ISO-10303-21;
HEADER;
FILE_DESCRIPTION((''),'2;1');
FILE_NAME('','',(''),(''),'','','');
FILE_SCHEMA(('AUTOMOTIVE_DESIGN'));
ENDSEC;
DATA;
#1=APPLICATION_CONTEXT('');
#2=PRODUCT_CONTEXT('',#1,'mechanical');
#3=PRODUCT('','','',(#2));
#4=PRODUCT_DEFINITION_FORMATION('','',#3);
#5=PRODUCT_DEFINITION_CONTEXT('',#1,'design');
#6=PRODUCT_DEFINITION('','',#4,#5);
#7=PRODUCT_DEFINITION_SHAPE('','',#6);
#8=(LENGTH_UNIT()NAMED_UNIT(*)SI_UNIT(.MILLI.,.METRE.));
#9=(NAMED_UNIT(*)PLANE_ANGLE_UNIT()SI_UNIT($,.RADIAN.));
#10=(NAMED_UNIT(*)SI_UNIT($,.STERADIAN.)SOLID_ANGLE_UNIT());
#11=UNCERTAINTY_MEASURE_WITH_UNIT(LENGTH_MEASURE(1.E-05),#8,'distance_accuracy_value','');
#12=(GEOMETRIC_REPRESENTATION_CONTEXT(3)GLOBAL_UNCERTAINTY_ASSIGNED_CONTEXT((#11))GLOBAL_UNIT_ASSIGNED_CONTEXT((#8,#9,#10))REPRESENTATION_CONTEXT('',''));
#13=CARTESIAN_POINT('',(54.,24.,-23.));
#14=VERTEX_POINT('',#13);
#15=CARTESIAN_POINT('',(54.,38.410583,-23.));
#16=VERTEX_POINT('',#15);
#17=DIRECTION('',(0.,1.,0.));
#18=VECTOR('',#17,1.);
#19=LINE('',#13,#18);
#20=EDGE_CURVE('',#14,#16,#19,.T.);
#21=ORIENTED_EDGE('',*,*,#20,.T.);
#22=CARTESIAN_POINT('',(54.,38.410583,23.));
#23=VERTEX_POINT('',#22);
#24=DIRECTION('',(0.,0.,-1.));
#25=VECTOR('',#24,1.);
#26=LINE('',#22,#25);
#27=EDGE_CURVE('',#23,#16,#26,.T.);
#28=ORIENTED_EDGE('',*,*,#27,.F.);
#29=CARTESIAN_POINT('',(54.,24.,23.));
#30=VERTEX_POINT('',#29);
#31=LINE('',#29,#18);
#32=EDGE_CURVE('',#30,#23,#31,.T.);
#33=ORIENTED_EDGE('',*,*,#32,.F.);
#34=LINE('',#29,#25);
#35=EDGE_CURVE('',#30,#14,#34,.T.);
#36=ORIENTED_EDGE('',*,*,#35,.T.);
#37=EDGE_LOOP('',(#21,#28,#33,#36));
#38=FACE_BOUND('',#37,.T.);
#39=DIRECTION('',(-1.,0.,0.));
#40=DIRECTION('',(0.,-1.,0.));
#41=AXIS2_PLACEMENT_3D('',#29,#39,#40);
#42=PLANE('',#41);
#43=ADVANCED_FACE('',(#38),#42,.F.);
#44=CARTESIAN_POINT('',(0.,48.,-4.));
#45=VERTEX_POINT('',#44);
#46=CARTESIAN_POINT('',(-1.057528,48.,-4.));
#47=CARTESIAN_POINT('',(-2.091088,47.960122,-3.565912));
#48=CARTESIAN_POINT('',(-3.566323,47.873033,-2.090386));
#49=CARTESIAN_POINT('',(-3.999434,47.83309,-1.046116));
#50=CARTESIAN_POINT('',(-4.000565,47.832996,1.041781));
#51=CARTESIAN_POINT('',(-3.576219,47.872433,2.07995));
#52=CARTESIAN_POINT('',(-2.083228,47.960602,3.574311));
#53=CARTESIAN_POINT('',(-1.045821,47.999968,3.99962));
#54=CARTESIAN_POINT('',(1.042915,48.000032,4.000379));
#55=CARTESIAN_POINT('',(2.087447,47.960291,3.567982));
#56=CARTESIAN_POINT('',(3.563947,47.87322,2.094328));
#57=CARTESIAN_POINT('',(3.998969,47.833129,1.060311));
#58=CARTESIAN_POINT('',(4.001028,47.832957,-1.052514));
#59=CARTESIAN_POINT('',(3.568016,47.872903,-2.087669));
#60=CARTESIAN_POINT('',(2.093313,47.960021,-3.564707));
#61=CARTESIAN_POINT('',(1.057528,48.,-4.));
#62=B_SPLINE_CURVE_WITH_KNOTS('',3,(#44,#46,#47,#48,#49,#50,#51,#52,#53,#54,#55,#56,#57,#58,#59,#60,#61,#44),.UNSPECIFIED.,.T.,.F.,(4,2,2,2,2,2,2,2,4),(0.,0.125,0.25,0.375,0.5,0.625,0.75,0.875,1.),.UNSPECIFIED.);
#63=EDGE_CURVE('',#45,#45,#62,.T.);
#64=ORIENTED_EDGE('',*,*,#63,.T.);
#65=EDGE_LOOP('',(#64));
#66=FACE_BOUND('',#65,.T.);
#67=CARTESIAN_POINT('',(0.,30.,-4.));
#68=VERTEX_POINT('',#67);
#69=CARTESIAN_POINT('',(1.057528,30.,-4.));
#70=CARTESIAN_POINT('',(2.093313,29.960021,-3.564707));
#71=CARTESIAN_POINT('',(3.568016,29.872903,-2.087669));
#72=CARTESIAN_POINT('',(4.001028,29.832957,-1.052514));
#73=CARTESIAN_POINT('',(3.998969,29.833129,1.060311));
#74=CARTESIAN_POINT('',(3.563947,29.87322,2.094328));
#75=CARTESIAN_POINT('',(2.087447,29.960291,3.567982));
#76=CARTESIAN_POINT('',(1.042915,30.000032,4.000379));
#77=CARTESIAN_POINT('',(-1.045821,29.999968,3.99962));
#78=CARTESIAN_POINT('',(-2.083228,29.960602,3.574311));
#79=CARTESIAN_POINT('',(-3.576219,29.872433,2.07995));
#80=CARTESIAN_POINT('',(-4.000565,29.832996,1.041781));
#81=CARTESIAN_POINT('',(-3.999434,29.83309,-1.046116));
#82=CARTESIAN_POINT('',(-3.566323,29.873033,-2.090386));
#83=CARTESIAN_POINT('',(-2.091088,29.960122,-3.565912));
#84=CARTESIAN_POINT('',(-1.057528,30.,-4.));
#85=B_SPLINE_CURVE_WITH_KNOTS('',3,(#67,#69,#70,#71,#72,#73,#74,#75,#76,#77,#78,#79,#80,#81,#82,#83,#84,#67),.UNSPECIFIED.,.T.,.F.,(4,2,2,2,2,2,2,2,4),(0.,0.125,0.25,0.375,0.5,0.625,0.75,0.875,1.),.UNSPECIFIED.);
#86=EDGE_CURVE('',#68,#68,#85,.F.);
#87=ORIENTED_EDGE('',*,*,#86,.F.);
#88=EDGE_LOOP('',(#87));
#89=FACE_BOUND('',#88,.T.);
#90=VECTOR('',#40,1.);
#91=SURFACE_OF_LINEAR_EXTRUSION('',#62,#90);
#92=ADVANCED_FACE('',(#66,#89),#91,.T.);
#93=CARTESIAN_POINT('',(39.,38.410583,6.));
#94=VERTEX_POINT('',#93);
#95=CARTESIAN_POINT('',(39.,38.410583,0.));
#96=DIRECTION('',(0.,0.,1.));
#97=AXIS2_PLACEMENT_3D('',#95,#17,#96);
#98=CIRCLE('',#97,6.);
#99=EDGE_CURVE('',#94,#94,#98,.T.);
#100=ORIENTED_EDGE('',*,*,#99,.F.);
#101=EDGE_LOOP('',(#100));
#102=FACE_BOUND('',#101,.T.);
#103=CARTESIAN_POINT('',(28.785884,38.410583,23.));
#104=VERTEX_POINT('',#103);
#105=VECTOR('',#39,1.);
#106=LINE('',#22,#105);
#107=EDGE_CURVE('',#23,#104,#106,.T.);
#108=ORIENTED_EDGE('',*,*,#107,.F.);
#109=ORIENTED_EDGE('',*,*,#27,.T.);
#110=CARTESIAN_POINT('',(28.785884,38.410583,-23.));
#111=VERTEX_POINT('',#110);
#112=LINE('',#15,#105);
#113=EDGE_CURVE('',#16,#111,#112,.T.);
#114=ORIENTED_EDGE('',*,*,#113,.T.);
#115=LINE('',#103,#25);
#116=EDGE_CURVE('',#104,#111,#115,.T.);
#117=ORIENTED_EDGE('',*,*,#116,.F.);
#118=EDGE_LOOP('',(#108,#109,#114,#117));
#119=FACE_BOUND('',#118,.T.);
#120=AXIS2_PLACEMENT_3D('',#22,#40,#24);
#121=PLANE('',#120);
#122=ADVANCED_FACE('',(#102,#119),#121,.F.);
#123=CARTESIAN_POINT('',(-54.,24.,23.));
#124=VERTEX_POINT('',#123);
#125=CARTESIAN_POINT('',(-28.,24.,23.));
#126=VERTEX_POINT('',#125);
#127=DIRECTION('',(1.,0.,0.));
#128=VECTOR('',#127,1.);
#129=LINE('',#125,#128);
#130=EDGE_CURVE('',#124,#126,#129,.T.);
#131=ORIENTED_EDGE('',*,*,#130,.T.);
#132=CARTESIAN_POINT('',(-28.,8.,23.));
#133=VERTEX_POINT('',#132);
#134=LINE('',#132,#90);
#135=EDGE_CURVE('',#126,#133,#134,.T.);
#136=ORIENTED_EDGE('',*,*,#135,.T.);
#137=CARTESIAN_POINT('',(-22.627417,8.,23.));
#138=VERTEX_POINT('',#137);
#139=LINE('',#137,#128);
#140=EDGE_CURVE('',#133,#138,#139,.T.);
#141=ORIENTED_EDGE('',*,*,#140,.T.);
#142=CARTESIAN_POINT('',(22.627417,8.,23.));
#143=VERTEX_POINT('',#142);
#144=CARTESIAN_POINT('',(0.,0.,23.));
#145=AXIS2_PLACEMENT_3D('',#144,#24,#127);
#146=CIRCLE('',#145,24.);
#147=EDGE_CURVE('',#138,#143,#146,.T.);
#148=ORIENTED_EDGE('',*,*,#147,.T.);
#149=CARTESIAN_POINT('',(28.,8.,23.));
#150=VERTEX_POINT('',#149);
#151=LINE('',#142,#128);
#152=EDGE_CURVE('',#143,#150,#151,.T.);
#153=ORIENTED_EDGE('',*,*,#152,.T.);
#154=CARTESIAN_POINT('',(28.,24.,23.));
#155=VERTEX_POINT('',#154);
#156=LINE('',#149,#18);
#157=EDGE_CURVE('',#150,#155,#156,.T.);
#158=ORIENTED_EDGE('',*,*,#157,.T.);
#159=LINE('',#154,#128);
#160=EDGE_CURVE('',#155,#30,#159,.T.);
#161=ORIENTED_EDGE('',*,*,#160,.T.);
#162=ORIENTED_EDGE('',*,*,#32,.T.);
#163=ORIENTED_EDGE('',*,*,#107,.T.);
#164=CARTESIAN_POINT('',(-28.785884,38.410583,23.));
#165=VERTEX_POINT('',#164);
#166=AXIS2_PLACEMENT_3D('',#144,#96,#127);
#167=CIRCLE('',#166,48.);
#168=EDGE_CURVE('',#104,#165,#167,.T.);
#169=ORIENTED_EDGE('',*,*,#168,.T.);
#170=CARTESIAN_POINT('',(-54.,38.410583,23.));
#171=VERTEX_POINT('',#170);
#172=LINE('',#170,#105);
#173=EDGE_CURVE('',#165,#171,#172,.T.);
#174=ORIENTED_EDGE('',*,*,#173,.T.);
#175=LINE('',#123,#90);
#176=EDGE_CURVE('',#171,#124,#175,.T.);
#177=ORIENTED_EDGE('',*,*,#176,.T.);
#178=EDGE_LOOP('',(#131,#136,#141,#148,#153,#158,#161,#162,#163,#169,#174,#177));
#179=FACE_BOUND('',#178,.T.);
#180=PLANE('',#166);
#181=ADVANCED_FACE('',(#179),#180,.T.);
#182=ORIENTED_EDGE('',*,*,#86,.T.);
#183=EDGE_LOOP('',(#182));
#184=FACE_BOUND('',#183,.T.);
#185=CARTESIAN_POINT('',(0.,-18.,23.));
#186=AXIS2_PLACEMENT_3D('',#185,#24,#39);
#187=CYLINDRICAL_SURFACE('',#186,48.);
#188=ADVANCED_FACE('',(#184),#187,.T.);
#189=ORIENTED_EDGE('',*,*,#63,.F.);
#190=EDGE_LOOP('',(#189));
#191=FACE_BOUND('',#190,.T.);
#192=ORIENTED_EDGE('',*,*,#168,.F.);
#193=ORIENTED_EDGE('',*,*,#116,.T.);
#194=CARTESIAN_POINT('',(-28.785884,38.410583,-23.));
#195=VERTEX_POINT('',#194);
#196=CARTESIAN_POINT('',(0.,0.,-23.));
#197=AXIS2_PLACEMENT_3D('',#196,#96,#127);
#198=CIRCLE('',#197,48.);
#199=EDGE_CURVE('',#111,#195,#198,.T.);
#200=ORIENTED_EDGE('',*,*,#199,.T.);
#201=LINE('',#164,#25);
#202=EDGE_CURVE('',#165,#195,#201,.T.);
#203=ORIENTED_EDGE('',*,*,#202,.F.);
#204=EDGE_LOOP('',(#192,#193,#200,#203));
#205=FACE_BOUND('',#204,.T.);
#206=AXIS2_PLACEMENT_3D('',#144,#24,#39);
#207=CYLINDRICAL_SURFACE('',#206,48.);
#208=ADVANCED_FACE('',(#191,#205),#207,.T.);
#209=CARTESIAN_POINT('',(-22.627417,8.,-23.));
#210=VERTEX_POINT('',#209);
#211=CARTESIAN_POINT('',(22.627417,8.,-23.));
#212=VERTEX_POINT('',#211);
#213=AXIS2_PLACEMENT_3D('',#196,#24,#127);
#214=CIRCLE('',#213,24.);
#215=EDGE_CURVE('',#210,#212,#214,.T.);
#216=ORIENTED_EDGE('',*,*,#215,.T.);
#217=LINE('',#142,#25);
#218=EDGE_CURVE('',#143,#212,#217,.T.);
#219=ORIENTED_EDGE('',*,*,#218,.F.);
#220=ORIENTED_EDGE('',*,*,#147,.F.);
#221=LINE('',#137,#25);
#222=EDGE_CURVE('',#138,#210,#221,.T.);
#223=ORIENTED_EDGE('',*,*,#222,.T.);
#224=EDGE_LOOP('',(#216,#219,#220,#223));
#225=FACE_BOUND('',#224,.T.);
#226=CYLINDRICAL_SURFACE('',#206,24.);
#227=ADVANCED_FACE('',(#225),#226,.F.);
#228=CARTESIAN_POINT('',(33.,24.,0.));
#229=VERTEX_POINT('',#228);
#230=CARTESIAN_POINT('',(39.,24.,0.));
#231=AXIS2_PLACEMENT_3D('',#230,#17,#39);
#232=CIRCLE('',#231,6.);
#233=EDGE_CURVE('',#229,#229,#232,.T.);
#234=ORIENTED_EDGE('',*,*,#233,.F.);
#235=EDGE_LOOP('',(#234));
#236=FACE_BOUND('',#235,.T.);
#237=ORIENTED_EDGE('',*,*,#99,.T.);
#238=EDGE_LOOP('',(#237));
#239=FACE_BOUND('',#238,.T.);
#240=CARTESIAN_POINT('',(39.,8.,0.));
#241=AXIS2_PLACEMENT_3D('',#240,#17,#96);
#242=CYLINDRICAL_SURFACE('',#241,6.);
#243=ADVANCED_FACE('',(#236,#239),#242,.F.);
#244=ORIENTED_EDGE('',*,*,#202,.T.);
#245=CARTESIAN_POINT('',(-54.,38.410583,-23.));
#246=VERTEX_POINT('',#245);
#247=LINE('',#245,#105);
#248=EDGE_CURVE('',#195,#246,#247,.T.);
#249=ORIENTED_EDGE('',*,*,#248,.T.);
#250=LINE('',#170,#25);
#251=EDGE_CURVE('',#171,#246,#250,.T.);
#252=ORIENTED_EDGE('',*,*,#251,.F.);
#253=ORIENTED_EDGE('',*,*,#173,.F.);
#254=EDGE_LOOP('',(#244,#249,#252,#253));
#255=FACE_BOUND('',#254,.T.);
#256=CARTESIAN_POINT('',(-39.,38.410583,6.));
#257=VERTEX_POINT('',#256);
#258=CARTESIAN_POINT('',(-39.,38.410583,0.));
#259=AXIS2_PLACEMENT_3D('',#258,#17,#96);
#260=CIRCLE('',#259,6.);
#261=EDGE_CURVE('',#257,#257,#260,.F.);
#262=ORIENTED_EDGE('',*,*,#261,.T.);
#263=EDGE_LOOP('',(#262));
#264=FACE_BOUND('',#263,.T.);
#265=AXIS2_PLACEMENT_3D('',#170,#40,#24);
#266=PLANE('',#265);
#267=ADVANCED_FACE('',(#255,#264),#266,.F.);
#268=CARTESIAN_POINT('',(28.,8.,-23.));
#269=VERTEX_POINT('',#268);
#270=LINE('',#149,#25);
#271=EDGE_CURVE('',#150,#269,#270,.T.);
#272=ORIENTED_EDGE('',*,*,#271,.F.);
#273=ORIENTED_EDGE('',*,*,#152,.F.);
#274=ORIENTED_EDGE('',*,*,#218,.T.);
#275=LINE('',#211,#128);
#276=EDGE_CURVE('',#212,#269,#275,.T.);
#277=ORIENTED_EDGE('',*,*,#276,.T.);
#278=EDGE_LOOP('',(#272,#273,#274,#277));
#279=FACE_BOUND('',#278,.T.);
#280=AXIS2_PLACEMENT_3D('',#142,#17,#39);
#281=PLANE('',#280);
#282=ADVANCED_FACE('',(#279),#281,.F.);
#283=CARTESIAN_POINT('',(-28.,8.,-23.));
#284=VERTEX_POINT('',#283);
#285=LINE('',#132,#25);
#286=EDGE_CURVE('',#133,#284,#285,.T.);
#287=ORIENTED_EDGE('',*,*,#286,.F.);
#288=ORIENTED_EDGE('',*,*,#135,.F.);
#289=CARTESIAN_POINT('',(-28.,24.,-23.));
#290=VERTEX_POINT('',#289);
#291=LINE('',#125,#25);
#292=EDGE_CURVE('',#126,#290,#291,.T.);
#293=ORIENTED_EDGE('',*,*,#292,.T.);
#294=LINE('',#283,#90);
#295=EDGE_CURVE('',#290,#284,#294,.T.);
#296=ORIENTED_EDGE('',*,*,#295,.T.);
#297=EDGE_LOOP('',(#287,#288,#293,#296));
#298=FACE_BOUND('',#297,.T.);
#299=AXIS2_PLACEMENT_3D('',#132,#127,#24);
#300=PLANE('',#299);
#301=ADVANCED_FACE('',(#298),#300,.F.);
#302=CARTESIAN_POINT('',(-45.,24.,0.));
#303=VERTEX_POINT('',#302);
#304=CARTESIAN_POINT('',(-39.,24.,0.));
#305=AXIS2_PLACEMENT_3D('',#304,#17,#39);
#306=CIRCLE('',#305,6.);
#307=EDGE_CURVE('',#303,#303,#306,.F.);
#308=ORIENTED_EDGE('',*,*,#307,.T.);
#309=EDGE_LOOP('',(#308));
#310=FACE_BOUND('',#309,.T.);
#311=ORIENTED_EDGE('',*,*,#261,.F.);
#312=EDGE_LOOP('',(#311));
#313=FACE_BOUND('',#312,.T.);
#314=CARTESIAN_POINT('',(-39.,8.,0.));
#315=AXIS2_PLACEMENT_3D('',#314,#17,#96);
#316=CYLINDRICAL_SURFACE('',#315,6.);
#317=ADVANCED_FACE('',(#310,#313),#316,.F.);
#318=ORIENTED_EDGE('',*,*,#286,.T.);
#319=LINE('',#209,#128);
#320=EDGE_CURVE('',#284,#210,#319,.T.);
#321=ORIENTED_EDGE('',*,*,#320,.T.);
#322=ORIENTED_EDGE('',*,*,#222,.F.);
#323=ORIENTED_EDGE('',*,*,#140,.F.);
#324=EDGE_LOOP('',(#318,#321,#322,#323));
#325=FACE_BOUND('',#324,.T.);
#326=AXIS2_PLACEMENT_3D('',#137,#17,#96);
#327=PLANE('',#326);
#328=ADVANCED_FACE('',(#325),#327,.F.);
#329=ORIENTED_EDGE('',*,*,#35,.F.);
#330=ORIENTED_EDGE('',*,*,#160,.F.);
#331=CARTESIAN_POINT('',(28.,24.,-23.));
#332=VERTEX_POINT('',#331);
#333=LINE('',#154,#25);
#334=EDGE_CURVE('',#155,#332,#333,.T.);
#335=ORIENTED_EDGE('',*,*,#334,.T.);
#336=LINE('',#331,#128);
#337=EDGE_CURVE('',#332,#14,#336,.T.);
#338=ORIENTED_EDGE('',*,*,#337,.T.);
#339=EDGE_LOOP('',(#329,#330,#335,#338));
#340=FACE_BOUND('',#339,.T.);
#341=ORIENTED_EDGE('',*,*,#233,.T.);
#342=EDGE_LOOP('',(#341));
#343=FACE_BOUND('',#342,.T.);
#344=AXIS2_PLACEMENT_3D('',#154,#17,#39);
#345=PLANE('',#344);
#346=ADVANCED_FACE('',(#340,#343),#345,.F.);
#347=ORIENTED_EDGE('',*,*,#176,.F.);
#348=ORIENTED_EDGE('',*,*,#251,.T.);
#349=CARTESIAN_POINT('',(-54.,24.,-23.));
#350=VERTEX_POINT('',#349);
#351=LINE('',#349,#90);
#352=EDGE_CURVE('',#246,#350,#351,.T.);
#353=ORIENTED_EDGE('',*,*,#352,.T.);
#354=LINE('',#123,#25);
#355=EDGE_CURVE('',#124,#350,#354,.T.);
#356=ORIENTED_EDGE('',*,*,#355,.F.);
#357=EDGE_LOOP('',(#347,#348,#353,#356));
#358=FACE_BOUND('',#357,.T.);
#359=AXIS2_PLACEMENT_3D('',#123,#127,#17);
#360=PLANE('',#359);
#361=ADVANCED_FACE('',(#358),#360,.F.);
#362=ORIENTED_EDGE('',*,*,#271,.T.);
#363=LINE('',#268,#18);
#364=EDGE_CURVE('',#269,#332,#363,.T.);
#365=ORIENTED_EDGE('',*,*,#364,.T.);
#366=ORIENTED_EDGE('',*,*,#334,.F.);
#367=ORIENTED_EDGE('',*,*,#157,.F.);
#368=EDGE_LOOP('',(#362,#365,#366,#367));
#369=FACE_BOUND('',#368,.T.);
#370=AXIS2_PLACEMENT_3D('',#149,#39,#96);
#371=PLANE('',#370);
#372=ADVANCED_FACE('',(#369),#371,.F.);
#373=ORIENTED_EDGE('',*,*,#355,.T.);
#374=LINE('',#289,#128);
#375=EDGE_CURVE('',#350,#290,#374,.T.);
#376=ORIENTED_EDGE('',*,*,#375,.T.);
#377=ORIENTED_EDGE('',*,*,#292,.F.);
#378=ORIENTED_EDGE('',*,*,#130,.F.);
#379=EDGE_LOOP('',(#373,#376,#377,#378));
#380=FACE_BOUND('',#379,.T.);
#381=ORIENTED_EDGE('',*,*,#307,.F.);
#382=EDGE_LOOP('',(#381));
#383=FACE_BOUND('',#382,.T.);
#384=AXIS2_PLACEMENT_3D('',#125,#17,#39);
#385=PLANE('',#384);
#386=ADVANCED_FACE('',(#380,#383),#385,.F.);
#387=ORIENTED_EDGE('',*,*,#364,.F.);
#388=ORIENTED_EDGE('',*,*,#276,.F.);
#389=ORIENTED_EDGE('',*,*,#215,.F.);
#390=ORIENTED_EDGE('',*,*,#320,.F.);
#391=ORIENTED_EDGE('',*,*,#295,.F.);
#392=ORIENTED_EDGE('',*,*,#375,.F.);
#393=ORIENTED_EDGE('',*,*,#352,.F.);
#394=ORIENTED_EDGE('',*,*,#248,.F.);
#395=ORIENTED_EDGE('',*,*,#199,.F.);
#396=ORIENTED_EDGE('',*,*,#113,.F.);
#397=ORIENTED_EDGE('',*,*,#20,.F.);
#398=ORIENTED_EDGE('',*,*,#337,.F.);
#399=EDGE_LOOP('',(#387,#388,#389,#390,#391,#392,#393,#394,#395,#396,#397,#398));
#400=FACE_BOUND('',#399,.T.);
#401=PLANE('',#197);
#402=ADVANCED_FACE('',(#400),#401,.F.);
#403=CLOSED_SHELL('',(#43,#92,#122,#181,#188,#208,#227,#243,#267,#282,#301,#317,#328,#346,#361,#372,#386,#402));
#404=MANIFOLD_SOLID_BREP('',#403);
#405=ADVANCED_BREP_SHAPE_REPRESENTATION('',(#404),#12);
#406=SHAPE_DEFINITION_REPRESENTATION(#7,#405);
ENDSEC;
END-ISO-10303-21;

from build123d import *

# Parameters (mm, degrees)
BOSS_EXTRUDE1_DEPTH  = 23
SKETCH2_R            = 6
CUT_EXTRUDE1_DEPTH   = 67.104489714
CUT_EXTRUDE2_START   = -8.577540152
CUT_EXTRUDE2_DEPTH   = 19.577540152
CUT_EXTRUDE2_START_2 = -5
CUT_EXTRUDE2_2_DEPTH = 10


with BuildPart() as part:
    # Sketch1 → Boss-Extrude1 (new, symmetric)
    with BuildSketch(Plane.XY):
        with BuildLine():
            Line((-22.627416998, 8), (-28, 8))
            Line((-28, 8), (-28, 24))
            Line((-28, 24), (-54, 24))
            Line((-54, 24), (-54, 38.410583031))
            Line((-54, 38.410583031), (-28.785883888, 38.410583031))
            ThreePointArc((-28.785883888, 38.410583031), (0, 48), (28.785883888, 38.410583031))
            Line((28.785883888, 38.410583031), (54, 38.410583031))
            Line((54, 38.410583031), (54, 24))
            Line((54, 24), (28, 24))
            Line((28, 24), (28, 8))
            Line((28, 8), (22.627416998, 8))
            ThreePointArc((22.627416998, 8), (0, 24), (-22.627416998, 8))
        make_face()
    extrude(amount=BOSS_EXTRUDE1_DEPTH, both=True)

    # Sketch2 → Cut-Extrude1 (cut, through all)
    with BuildSketch(Plane(origin=(0, 38.410583031, 0), x_dir=(1, 0, 0), z_dir=(0, 1, 0))):
        with Locations(Location((-39, 0, 0), (0, 0, 270))):
            Circle(SKETCH2_R)
        with Locations(Location((39, 0, 0), (0, 0, 270))):
            Circle(SKETCH2_R)
    extrude(amount=-CUT_EXTRUDE1_DEPTH, mode=Mode.SUBTRACT)

    # Cut-Extrude2: read off the stored shape, not the designer's step
    # Cut-Extrude2 outline → Cut-Extrude2 (cut)
    with BuildSketch(Plane(origin=(0, 38.410583031, 0), x_dir=(1, 0, 0), z_dir=(0, 1, 0)).offset(CUT_EXTRUDE2_START)):
        with BuildLine():
            add(Edge.make_bspline(
                [(0, 4), (-1.057527997, 4), (-2.091087742, 3.565911724), (-3.566323367, 2.090385612), (-3.999433765, 1.046115956), (-4.00056506, -1.04178128), (-3.576219278, -2.07994956), (-2.083227921, -3.574310552), (-1.045821073, -3.9996204), (1.042915307, -4.000379072), (2.087446575, -3.567981834), (3.563947107, -2.094327717), (3.998968512, -1.060310778), (4.001027689, 1.052513916), (3.568016054, 2.087668509), (2.093312914, 3.564707479), (1.057527997, 4), (0, 4)],
                knots=[0, 0, 0, 0, 0.125, 0.125, 0.25, 0.25, 0.375, 0.375, 0.5, 0.5, 0.625, 0.625, 0.75, 0.75, 0.875, 0.875, 1, 1, 1, 1], degree=3))
        make_face()
    extrude(amount=CUT_EXTRUDE2_DEPTH, mode=Mode.SUBTRACT)

    # Cut-Extrude2 2 outline → Cut-Extrude2 2 (add)
    with BuildSketch(Plane.XY.offset(CUT_EXTRUDE2_START_2)):
        with BuildLine():
            ThreePointArc((4.00000004, 29.83304297), (-2.3e-08, 30), (-4.000000085, 29.833042966))
            Line((-4.000000085, 29.833042966), (4.00000004, 29.83304297))
        make_face()
    extrude(amount=CUT_EXTRUDE2_2_DEPTH)


solid = part.part
